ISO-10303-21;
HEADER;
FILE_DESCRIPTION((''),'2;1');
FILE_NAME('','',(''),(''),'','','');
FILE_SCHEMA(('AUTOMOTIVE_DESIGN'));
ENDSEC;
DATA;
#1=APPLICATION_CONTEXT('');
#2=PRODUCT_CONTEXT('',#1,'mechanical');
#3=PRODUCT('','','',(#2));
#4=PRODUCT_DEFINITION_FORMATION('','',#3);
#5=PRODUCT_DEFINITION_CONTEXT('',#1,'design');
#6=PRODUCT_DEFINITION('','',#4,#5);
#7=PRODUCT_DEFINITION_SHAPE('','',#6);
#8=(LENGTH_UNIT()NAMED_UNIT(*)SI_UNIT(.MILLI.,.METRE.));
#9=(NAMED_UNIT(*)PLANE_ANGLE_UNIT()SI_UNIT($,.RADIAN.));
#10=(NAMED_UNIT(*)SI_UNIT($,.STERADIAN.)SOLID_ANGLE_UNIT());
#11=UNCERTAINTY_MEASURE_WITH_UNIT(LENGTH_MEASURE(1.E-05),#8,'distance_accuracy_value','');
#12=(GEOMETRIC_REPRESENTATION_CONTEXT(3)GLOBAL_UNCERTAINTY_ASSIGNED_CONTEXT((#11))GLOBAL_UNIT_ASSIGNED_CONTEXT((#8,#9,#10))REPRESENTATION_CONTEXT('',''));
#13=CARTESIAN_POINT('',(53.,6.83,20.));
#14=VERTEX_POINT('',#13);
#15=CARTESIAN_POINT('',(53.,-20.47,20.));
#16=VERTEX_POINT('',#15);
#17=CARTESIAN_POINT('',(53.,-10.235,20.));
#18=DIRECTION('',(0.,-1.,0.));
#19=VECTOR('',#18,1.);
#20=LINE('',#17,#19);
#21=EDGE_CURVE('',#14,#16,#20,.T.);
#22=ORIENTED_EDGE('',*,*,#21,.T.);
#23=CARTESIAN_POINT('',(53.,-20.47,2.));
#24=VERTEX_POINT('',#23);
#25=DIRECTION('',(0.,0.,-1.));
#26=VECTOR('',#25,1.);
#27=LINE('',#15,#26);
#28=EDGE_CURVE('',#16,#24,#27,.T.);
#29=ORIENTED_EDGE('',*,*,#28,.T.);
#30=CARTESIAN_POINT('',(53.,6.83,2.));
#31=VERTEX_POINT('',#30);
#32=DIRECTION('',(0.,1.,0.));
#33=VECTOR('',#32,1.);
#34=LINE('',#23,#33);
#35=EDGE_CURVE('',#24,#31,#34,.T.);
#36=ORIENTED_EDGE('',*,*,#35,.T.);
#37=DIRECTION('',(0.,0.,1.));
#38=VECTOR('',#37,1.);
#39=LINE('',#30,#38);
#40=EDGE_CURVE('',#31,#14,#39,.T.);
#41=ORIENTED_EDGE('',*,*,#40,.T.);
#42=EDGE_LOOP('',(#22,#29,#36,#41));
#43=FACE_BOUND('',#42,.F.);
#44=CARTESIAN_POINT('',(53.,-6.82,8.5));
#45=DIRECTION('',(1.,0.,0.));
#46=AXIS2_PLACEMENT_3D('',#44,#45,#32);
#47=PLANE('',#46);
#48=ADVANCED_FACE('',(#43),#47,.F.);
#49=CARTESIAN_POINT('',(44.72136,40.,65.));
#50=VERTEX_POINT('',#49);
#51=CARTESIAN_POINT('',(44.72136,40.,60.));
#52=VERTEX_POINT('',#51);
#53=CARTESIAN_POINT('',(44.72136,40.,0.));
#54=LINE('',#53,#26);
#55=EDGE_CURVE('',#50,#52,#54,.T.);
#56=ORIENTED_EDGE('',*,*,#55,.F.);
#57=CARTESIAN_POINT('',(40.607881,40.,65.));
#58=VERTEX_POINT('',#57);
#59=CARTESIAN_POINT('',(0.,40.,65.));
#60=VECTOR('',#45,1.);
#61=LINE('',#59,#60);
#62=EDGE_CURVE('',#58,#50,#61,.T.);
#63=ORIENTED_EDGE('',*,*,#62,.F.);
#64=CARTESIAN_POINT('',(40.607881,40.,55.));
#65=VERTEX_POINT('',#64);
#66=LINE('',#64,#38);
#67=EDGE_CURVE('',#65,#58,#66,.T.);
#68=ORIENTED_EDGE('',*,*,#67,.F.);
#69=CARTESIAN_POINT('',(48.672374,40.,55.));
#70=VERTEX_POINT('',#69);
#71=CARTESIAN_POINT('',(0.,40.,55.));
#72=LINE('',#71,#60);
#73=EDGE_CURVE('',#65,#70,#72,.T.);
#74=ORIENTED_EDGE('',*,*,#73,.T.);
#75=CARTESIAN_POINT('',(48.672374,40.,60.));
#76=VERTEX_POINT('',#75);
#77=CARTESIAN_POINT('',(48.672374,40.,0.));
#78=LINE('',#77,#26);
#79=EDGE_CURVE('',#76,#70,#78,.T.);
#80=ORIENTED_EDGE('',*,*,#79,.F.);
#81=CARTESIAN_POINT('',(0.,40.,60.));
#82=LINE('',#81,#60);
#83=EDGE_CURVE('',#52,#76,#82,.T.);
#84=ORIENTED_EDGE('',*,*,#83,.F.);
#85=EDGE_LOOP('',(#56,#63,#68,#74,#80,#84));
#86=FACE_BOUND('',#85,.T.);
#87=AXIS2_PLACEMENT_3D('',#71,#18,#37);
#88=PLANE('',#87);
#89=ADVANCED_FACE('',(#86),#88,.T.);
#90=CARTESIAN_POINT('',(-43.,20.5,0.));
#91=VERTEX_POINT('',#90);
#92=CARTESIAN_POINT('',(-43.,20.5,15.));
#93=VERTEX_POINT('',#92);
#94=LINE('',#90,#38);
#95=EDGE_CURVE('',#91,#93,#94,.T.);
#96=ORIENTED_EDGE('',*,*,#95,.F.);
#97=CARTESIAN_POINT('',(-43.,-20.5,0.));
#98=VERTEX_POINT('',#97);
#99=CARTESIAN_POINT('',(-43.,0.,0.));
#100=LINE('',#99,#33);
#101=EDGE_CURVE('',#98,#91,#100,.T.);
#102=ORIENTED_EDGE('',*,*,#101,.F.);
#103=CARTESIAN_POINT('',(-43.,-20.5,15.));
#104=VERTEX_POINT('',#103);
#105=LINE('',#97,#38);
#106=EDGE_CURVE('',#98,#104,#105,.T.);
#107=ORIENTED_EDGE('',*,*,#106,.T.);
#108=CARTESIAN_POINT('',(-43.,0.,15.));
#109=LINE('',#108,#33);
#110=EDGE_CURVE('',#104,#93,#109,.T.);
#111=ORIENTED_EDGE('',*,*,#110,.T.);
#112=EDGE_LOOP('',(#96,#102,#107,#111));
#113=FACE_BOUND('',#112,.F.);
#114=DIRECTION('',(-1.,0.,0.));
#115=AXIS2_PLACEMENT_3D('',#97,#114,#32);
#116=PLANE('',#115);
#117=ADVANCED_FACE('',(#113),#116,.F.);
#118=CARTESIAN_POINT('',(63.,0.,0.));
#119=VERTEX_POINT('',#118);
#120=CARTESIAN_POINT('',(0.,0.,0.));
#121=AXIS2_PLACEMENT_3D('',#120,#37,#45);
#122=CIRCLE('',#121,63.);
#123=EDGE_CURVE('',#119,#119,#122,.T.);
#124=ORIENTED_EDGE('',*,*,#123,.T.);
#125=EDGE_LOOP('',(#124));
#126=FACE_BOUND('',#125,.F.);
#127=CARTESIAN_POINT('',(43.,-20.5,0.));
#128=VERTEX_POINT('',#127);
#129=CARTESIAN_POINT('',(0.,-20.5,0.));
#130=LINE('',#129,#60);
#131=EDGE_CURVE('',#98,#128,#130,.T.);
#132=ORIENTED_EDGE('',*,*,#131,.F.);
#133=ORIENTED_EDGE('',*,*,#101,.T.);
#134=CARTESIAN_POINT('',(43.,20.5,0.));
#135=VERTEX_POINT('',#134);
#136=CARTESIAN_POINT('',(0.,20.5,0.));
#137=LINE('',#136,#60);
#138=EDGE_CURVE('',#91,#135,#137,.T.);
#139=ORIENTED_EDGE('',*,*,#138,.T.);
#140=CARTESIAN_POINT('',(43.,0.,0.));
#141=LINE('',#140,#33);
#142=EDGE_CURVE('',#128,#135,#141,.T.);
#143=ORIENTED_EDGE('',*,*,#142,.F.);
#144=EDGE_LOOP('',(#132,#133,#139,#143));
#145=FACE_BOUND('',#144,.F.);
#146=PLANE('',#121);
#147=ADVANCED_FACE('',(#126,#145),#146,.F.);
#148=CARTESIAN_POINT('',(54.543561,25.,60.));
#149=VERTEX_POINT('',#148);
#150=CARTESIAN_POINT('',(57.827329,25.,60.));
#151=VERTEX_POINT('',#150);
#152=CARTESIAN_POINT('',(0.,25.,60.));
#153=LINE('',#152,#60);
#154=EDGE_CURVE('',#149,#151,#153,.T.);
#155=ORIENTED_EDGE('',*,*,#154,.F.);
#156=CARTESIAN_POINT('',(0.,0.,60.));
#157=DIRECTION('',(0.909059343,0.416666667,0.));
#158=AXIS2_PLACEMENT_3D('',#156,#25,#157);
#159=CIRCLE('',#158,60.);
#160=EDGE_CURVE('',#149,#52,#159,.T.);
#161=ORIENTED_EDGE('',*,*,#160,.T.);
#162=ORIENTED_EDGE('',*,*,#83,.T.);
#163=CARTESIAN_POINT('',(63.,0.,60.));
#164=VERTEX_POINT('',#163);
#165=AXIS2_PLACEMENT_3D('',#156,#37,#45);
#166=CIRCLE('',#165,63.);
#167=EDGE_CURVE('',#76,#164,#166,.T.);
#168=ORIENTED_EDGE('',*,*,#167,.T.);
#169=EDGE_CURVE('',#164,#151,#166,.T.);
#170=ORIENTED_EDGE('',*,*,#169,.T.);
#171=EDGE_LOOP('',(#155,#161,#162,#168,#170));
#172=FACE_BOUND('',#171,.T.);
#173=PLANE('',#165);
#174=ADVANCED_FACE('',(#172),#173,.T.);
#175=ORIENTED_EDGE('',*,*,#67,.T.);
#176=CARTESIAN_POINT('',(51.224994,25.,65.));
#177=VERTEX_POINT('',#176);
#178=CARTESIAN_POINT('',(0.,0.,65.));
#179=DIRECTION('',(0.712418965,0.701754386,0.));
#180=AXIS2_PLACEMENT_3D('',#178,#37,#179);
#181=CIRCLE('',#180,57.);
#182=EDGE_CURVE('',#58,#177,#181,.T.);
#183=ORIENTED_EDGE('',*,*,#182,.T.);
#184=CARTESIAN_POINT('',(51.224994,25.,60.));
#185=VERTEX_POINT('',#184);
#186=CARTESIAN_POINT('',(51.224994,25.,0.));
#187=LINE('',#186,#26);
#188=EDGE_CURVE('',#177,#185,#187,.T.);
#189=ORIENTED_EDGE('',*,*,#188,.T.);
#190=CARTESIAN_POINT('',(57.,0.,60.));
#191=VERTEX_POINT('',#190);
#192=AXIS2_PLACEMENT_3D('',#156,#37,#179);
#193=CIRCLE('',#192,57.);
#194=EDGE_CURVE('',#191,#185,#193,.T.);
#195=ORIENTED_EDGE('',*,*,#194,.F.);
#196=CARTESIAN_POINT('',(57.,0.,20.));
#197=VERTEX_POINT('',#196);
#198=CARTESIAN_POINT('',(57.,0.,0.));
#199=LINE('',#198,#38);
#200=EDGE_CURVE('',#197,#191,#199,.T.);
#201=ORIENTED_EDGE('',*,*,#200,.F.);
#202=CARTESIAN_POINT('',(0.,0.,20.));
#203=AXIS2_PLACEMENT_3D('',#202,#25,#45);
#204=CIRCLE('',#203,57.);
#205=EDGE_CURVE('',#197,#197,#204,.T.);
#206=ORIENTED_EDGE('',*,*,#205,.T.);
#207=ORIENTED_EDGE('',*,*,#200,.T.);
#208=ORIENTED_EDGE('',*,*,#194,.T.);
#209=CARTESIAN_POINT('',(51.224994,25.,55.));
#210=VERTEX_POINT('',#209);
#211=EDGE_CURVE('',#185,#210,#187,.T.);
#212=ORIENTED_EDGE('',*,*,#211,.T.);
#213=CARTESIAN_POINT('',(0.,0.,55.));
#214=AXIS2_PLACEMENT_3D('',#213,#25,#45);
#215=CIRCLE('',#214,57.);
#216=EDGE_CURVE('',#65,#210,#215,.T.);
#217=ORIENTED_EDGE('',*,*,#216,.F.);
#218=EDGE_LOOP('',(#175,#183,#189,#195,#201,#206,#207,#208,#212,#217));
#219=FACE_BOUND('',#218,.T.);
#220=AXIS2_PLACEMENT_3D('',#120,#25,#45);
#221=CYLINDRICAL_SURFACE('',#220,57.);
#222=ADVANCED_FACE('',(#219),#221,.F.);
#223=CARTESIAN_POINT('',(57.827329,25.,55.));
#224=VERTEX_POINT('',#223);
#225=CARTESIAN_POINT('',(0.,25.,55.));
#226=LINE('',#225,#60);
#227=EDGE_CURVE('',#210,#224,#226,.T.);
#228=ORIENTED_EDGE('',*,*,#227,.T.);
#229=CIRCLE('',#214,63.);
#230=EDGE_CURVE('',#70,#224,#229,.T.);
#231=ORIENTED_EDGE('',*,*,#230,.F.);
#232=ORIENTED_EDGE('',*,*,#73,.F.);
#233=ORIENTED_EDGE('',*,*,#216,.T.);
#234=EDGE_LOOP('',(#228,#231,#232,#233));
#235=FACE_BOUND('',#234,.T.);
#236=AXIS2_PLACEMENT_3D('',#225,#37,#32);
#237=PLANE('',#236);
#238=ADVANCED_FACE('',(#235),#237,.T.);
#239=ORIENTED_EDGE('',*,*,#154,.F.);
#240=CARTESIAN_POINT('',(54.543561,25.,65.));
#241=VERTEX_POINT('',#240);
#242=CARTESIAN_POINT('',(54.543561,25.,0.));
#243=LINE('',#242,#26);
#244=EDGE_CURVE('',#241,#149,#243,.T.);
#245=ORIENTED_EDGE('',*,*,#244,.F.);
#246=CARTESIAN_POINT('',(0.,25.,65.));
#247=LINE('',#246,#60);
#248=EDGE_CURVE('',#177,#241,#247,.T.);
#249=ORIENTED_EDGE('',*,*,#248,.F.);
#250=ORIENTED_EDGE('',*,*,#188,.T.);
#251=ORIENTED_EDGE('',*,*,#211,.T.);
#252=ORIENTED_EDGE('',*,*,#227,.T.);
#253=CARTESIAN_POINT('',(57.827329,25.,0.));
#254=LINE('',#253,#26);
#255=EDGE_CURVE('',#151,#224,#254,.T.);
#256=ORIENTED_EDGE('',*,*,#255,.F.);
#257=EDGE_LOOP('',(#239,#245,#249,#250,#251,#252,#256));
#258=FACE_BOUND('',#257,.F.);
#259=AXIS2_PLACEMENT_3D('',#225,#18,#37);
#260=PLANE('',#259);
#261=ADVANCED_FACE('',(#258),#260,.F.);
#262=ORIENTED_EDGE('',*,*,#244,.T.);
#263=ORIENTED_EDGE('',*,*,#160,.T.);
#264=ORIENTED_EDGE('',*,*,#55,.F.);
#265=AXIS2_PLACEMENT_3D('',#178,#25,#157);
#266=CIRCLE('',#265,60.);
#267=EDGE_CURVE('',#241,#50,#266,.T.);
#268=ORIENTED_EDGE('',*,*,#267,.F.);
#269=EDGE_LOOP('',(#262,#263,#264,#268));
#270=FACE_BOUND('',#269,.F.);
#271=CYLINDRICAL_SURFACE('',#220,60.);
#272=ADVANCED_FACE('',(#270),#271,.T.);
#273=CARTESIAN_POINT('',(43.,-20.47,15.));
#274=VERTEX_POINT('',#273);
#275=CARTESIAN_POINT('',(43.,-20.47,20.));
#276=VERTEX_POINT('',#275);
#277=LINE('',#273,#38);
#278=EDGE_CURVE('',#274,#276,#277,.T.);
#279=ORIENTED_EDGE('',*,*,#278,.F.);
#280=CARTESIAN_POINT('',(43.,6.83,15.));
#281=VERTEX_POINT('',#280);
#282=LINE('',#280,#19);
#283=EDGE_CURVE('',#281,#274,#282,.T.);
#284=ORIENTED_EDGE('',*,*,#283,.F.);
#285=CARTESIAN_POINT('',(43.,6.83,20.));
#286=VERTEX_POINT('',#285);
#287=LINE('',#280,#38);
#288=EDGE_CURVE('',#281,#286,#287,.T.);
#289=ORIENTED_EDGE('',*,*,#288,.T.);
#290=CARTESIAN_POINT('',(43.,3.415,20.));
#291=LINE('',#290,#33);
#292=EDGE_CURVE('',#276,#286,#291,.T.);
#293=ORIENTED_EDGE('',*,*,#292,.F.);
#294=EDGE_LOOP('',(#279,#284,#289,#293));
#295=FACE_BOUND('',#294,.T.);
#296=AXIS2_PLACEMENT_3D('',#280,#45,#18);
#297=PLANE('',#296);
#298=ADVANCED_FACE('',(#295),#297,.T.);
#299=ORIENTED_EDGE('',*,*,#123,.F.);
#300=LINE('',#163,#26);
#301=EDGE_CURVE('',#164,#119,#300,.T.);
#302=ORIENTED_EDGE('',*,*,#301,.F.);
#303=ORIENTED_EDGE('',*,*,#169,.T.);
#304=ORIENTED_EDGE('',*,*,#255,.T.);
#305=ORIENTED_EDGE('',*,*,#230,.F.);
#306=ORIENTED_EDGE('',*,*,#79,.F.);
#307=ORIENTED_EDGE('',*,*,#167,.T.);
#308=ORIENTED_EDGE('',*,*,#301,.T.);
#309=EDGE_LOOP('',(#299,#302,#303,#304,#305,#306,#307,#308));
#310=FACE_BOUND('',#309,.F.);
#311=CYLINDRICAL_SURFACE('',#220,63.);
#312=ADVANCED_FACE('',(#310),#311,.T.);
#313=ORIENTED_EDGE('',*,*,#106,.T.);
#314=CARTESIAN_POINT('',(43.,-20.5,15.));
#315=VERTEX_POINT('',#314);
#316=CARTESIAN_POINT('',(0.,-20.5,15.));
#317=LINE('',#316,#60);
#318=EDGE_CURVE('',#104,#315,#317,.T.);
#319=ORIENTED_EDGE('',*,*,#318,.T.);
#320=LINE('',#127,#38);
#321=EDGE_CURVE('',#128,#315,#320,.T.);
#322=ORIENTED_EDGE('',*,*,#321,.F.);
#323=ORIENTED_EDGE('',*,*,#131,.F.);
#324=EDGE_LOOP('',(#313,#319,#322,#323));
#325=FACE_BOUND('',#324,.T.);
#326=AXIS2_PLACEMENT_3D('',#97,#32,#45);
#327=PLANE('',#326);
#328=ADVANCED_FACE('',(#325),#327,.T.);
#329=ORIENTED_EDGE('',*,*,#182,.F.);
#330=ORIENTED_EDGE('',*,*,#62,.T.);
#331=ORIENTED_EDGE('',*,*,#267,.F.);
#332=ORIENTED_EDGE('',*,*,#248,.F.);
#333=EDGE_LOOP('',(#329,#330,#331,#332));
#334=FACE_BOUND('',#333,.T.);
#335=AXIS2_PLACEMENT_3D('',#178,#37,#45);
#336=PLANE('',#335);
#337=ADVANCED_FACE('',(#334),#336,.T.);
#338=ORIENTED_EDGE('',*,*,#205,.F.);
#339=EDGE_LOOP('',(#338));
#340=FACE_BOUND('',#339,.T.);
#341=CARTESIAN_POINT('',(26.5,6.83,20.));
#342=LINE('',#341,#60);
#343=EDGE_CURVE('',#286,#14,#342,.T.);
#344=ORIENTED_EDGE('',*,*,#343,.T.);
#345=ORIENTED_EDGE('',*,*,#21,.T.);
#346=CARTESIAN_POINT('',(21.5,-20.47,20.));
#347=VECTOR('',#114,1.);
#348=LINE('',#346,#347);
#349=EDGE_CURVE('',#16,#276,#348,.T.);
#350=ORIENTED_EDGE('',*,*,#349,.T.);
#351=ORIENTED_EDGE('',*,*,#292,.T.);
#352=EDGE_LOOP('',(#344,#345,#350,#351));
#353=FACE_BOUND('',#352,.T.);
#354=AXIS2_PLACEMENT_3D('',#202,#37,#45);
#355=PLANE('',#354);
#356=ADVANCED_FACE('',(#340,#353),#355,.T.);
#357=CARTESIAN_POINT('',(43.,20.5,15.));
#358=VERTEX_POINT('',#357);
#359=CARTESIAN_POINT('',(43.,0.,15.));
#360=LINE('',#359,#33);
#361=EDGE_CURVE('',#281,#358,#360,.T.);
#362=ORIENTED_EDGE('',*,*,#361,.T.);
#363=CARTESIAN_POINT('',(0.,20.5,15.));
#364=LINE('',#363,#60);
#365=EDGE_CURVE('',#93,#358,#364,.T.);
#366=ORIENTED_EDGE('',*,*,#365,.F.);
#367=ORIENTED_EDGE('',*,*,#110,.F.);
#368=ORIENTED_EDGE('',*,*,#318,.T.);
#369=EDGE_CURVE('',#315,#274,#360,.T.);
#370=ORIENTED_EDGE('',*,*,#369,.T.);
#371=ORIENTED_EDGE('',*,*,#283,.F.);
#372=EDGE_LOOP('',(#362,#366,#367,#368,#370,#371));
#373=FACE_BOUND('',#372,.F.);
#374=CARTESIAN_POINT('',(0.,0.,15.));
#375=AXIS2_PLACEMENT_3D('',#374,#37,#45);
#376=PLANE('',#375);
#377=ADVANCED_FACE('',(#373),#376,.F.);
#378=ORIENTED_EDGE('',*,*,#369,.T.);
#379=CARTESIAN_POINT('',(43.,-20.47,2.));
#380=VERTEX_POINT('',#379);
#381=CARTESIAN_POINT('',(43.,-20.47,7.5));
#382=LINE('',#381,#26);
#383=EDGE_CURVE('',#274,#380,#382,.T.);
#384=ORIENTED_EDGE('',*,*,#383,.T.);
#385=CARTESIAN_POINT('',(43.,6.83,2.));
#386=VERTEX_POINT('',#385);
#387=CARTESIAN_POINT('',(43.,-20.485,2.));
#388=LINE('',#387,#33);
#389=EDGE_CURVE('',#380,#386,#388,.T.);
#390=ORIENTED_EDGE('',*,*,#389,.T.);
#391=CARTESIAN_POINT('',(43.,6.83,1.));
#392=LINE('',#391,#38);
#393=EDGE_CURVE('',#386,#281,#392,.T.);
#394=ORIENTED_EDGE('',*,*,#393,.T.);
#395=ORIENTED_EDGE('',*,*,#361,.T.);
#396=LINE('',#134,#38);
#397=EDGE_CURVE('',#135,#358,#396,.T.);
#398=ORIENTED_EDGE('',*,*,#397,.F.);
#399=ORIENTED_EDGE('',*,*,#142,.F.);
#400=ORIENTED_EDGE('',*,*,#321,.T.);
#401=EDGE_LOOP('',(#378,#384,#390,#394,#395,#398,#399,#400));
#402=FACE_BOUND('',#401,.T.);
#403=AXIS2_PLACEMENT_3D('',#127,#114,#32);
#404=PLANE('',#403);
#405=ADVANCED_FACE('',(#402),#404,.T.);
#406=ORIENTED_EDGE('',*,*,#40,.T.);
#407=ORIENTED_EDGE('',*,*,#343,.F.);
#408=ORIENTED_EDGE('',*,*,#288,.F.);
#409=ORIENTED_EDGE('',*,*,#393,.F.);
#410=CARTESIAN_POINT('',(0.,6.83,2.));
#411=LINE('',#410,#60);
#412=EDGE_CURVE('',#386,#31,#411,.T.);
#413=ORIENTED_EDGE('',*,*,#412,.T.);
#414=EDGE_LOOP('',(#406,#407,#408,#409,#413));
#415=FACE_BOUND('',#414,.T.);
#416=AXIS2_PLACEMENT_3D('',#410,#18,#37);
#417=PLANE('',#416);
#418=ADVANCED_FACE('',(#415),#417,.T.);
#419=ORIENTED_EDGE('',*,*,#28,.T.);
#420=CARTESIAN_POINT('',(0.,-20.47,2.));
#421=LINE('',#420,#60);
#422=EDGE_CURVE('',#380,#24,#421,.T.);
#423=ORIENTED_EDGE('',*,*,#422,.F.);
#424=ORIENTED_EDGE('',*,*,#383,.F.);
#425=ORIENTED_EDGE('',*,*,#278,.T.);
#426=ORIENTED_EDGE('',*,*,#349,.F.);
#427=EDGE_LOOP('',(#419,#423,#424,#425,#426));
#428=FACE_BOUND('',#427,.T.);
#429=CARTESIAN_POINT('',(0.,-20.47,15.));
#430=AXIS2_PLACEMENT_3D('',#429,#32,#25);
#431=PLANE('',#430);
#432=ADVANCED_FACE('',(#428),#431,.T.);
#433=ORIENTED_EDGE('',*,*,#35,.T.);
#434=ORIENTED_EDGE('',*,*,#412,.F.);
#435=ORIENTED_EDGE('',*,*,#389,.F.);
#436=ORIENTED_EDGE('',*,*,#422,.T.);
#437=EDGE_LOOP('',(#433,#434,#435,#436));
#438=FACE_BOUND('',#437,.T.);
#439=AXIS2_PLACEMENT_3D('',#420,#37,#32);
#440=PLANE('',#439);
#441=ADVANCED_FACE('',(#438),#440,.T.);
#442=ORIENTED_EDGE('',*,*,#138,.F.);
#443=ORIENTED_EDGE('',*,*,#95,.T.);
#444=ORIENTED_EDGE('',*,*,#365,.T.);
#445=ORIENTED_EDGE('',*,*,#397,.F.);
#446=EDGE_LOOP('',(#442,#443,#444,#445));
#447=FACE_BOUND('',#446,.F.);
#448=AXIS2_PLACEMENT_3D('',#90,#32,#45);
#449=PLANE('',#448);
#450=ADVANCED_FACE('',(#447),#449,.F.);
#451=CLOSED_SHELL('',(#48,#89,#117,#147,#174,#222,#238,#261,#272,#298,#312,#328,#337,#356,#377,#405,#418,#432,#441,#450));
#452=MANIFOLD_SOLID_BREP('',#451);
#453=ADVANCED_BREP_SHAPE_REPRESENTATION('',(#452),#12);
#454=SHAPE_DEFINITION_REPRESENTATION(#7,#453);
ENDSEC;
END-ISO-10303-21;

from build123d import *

# Parameters (mm, degrees)
F0_R      = 63
F0_R_2    = 60
F2_DEPTH  = 60
F1_R      = 60
F1_R_2    = 57
F3_DEPTH  = 65
F4_R      = 57
F5_DEPTH  = 60
F7_R      = 57
F8_DEPTH  = 40
F9_W      = 15
F9_H      = 10
F10_DEPTH = 279.5
F11_DEPTH = 71.5
F13_R     = 63
F14_DEPTH = 20
F15_W     = 86
F15_H     = 41
F16_DEPTH = 15
F18_DEPTH = 53
F20_DEPTH = 128


# Not quite as in the source:
# - a feature names something its author has since deleted; it is built from what else it names


with BuildPart() as f2:
    # F0 (on Top) → F2 (new body)
    with BuildSketch(Plane.XY):
        Circle(F0_R)
        Circle(F0_R_2, mode=Mode.SUBTRACT)
    extrude(amount=F2_DEPTH)

    # F1 (on Top) → F3 (join)
    with BuildSketch(Plane.XY):
        Circle(F1_R)
        Circle(F1_R_2, mode=Mode.SUBTRACT)
    extrude(amount=F3_DEPTH)

    # F4 (on Top) → F5 (join)
    with BuildSketch(Plane.XY):
        Circle(F4_R)
    extrude(amount=F5_DEPTH)

    # F7 (on offset) → F8 (cut)
    with BuildSketch(Plane.XY.offset(45)):
        Circle(F7_R)
    extrude(amount=-F8_DEPTH, mode=Mode.SUBTRACT)

    # F9 (on Right) → F10 (cut)
    with BuildSketch(Plane.YZ):
        with Locations((32.5, 60)):
            Rectangle(F9_W, F9_H)
    extrude(amount=F10_DEPTH, mode=Mode.SUBTRACT)

    # F1 (on Top) → F11 (cut)
    with BuildSketch(Plane.XY):
        Circle(F1_R_2)
    extrude(amount=F11_DEPTH, mode=Mode.SUBTRACT)

    # F13 (on Top) → F14 (join)
    with BuildSketch(Plane.XY):
        Circle(F13_R)
    extrude(amount=F14_DEPTH)

    # F15 (on Top) → F16 (cut)
    with BuildSketch(Plane.XY):
        Rectangle(F15_W, F15_H)
    extrude(amount=F16_DEPTH, mode=Mode.SUBTRACT)

    # F17 (on Right) → F18 (cut)
    with BuildSketch(Plane.YZ):
        Polygon((6.83, 15), (0, 15), (-20.47, 15), (-20.47, 2), (6.83, 2), align=None)
    extrude(amount=F18_DEPTH, mode=Mode.SUBTRACT)

    # F19 (on offset) → F20 (cut)
    with BuildSketch(Plane.XY.offset(15)):
        Polygon((43, 6.83), (43, 0), (43, -20.47), (53, -20.47), (53, 6.83), align=None)
    extrude(amount=F20_DEPTH, mode=Mode.SUBTRACT)


solid = f2.part
